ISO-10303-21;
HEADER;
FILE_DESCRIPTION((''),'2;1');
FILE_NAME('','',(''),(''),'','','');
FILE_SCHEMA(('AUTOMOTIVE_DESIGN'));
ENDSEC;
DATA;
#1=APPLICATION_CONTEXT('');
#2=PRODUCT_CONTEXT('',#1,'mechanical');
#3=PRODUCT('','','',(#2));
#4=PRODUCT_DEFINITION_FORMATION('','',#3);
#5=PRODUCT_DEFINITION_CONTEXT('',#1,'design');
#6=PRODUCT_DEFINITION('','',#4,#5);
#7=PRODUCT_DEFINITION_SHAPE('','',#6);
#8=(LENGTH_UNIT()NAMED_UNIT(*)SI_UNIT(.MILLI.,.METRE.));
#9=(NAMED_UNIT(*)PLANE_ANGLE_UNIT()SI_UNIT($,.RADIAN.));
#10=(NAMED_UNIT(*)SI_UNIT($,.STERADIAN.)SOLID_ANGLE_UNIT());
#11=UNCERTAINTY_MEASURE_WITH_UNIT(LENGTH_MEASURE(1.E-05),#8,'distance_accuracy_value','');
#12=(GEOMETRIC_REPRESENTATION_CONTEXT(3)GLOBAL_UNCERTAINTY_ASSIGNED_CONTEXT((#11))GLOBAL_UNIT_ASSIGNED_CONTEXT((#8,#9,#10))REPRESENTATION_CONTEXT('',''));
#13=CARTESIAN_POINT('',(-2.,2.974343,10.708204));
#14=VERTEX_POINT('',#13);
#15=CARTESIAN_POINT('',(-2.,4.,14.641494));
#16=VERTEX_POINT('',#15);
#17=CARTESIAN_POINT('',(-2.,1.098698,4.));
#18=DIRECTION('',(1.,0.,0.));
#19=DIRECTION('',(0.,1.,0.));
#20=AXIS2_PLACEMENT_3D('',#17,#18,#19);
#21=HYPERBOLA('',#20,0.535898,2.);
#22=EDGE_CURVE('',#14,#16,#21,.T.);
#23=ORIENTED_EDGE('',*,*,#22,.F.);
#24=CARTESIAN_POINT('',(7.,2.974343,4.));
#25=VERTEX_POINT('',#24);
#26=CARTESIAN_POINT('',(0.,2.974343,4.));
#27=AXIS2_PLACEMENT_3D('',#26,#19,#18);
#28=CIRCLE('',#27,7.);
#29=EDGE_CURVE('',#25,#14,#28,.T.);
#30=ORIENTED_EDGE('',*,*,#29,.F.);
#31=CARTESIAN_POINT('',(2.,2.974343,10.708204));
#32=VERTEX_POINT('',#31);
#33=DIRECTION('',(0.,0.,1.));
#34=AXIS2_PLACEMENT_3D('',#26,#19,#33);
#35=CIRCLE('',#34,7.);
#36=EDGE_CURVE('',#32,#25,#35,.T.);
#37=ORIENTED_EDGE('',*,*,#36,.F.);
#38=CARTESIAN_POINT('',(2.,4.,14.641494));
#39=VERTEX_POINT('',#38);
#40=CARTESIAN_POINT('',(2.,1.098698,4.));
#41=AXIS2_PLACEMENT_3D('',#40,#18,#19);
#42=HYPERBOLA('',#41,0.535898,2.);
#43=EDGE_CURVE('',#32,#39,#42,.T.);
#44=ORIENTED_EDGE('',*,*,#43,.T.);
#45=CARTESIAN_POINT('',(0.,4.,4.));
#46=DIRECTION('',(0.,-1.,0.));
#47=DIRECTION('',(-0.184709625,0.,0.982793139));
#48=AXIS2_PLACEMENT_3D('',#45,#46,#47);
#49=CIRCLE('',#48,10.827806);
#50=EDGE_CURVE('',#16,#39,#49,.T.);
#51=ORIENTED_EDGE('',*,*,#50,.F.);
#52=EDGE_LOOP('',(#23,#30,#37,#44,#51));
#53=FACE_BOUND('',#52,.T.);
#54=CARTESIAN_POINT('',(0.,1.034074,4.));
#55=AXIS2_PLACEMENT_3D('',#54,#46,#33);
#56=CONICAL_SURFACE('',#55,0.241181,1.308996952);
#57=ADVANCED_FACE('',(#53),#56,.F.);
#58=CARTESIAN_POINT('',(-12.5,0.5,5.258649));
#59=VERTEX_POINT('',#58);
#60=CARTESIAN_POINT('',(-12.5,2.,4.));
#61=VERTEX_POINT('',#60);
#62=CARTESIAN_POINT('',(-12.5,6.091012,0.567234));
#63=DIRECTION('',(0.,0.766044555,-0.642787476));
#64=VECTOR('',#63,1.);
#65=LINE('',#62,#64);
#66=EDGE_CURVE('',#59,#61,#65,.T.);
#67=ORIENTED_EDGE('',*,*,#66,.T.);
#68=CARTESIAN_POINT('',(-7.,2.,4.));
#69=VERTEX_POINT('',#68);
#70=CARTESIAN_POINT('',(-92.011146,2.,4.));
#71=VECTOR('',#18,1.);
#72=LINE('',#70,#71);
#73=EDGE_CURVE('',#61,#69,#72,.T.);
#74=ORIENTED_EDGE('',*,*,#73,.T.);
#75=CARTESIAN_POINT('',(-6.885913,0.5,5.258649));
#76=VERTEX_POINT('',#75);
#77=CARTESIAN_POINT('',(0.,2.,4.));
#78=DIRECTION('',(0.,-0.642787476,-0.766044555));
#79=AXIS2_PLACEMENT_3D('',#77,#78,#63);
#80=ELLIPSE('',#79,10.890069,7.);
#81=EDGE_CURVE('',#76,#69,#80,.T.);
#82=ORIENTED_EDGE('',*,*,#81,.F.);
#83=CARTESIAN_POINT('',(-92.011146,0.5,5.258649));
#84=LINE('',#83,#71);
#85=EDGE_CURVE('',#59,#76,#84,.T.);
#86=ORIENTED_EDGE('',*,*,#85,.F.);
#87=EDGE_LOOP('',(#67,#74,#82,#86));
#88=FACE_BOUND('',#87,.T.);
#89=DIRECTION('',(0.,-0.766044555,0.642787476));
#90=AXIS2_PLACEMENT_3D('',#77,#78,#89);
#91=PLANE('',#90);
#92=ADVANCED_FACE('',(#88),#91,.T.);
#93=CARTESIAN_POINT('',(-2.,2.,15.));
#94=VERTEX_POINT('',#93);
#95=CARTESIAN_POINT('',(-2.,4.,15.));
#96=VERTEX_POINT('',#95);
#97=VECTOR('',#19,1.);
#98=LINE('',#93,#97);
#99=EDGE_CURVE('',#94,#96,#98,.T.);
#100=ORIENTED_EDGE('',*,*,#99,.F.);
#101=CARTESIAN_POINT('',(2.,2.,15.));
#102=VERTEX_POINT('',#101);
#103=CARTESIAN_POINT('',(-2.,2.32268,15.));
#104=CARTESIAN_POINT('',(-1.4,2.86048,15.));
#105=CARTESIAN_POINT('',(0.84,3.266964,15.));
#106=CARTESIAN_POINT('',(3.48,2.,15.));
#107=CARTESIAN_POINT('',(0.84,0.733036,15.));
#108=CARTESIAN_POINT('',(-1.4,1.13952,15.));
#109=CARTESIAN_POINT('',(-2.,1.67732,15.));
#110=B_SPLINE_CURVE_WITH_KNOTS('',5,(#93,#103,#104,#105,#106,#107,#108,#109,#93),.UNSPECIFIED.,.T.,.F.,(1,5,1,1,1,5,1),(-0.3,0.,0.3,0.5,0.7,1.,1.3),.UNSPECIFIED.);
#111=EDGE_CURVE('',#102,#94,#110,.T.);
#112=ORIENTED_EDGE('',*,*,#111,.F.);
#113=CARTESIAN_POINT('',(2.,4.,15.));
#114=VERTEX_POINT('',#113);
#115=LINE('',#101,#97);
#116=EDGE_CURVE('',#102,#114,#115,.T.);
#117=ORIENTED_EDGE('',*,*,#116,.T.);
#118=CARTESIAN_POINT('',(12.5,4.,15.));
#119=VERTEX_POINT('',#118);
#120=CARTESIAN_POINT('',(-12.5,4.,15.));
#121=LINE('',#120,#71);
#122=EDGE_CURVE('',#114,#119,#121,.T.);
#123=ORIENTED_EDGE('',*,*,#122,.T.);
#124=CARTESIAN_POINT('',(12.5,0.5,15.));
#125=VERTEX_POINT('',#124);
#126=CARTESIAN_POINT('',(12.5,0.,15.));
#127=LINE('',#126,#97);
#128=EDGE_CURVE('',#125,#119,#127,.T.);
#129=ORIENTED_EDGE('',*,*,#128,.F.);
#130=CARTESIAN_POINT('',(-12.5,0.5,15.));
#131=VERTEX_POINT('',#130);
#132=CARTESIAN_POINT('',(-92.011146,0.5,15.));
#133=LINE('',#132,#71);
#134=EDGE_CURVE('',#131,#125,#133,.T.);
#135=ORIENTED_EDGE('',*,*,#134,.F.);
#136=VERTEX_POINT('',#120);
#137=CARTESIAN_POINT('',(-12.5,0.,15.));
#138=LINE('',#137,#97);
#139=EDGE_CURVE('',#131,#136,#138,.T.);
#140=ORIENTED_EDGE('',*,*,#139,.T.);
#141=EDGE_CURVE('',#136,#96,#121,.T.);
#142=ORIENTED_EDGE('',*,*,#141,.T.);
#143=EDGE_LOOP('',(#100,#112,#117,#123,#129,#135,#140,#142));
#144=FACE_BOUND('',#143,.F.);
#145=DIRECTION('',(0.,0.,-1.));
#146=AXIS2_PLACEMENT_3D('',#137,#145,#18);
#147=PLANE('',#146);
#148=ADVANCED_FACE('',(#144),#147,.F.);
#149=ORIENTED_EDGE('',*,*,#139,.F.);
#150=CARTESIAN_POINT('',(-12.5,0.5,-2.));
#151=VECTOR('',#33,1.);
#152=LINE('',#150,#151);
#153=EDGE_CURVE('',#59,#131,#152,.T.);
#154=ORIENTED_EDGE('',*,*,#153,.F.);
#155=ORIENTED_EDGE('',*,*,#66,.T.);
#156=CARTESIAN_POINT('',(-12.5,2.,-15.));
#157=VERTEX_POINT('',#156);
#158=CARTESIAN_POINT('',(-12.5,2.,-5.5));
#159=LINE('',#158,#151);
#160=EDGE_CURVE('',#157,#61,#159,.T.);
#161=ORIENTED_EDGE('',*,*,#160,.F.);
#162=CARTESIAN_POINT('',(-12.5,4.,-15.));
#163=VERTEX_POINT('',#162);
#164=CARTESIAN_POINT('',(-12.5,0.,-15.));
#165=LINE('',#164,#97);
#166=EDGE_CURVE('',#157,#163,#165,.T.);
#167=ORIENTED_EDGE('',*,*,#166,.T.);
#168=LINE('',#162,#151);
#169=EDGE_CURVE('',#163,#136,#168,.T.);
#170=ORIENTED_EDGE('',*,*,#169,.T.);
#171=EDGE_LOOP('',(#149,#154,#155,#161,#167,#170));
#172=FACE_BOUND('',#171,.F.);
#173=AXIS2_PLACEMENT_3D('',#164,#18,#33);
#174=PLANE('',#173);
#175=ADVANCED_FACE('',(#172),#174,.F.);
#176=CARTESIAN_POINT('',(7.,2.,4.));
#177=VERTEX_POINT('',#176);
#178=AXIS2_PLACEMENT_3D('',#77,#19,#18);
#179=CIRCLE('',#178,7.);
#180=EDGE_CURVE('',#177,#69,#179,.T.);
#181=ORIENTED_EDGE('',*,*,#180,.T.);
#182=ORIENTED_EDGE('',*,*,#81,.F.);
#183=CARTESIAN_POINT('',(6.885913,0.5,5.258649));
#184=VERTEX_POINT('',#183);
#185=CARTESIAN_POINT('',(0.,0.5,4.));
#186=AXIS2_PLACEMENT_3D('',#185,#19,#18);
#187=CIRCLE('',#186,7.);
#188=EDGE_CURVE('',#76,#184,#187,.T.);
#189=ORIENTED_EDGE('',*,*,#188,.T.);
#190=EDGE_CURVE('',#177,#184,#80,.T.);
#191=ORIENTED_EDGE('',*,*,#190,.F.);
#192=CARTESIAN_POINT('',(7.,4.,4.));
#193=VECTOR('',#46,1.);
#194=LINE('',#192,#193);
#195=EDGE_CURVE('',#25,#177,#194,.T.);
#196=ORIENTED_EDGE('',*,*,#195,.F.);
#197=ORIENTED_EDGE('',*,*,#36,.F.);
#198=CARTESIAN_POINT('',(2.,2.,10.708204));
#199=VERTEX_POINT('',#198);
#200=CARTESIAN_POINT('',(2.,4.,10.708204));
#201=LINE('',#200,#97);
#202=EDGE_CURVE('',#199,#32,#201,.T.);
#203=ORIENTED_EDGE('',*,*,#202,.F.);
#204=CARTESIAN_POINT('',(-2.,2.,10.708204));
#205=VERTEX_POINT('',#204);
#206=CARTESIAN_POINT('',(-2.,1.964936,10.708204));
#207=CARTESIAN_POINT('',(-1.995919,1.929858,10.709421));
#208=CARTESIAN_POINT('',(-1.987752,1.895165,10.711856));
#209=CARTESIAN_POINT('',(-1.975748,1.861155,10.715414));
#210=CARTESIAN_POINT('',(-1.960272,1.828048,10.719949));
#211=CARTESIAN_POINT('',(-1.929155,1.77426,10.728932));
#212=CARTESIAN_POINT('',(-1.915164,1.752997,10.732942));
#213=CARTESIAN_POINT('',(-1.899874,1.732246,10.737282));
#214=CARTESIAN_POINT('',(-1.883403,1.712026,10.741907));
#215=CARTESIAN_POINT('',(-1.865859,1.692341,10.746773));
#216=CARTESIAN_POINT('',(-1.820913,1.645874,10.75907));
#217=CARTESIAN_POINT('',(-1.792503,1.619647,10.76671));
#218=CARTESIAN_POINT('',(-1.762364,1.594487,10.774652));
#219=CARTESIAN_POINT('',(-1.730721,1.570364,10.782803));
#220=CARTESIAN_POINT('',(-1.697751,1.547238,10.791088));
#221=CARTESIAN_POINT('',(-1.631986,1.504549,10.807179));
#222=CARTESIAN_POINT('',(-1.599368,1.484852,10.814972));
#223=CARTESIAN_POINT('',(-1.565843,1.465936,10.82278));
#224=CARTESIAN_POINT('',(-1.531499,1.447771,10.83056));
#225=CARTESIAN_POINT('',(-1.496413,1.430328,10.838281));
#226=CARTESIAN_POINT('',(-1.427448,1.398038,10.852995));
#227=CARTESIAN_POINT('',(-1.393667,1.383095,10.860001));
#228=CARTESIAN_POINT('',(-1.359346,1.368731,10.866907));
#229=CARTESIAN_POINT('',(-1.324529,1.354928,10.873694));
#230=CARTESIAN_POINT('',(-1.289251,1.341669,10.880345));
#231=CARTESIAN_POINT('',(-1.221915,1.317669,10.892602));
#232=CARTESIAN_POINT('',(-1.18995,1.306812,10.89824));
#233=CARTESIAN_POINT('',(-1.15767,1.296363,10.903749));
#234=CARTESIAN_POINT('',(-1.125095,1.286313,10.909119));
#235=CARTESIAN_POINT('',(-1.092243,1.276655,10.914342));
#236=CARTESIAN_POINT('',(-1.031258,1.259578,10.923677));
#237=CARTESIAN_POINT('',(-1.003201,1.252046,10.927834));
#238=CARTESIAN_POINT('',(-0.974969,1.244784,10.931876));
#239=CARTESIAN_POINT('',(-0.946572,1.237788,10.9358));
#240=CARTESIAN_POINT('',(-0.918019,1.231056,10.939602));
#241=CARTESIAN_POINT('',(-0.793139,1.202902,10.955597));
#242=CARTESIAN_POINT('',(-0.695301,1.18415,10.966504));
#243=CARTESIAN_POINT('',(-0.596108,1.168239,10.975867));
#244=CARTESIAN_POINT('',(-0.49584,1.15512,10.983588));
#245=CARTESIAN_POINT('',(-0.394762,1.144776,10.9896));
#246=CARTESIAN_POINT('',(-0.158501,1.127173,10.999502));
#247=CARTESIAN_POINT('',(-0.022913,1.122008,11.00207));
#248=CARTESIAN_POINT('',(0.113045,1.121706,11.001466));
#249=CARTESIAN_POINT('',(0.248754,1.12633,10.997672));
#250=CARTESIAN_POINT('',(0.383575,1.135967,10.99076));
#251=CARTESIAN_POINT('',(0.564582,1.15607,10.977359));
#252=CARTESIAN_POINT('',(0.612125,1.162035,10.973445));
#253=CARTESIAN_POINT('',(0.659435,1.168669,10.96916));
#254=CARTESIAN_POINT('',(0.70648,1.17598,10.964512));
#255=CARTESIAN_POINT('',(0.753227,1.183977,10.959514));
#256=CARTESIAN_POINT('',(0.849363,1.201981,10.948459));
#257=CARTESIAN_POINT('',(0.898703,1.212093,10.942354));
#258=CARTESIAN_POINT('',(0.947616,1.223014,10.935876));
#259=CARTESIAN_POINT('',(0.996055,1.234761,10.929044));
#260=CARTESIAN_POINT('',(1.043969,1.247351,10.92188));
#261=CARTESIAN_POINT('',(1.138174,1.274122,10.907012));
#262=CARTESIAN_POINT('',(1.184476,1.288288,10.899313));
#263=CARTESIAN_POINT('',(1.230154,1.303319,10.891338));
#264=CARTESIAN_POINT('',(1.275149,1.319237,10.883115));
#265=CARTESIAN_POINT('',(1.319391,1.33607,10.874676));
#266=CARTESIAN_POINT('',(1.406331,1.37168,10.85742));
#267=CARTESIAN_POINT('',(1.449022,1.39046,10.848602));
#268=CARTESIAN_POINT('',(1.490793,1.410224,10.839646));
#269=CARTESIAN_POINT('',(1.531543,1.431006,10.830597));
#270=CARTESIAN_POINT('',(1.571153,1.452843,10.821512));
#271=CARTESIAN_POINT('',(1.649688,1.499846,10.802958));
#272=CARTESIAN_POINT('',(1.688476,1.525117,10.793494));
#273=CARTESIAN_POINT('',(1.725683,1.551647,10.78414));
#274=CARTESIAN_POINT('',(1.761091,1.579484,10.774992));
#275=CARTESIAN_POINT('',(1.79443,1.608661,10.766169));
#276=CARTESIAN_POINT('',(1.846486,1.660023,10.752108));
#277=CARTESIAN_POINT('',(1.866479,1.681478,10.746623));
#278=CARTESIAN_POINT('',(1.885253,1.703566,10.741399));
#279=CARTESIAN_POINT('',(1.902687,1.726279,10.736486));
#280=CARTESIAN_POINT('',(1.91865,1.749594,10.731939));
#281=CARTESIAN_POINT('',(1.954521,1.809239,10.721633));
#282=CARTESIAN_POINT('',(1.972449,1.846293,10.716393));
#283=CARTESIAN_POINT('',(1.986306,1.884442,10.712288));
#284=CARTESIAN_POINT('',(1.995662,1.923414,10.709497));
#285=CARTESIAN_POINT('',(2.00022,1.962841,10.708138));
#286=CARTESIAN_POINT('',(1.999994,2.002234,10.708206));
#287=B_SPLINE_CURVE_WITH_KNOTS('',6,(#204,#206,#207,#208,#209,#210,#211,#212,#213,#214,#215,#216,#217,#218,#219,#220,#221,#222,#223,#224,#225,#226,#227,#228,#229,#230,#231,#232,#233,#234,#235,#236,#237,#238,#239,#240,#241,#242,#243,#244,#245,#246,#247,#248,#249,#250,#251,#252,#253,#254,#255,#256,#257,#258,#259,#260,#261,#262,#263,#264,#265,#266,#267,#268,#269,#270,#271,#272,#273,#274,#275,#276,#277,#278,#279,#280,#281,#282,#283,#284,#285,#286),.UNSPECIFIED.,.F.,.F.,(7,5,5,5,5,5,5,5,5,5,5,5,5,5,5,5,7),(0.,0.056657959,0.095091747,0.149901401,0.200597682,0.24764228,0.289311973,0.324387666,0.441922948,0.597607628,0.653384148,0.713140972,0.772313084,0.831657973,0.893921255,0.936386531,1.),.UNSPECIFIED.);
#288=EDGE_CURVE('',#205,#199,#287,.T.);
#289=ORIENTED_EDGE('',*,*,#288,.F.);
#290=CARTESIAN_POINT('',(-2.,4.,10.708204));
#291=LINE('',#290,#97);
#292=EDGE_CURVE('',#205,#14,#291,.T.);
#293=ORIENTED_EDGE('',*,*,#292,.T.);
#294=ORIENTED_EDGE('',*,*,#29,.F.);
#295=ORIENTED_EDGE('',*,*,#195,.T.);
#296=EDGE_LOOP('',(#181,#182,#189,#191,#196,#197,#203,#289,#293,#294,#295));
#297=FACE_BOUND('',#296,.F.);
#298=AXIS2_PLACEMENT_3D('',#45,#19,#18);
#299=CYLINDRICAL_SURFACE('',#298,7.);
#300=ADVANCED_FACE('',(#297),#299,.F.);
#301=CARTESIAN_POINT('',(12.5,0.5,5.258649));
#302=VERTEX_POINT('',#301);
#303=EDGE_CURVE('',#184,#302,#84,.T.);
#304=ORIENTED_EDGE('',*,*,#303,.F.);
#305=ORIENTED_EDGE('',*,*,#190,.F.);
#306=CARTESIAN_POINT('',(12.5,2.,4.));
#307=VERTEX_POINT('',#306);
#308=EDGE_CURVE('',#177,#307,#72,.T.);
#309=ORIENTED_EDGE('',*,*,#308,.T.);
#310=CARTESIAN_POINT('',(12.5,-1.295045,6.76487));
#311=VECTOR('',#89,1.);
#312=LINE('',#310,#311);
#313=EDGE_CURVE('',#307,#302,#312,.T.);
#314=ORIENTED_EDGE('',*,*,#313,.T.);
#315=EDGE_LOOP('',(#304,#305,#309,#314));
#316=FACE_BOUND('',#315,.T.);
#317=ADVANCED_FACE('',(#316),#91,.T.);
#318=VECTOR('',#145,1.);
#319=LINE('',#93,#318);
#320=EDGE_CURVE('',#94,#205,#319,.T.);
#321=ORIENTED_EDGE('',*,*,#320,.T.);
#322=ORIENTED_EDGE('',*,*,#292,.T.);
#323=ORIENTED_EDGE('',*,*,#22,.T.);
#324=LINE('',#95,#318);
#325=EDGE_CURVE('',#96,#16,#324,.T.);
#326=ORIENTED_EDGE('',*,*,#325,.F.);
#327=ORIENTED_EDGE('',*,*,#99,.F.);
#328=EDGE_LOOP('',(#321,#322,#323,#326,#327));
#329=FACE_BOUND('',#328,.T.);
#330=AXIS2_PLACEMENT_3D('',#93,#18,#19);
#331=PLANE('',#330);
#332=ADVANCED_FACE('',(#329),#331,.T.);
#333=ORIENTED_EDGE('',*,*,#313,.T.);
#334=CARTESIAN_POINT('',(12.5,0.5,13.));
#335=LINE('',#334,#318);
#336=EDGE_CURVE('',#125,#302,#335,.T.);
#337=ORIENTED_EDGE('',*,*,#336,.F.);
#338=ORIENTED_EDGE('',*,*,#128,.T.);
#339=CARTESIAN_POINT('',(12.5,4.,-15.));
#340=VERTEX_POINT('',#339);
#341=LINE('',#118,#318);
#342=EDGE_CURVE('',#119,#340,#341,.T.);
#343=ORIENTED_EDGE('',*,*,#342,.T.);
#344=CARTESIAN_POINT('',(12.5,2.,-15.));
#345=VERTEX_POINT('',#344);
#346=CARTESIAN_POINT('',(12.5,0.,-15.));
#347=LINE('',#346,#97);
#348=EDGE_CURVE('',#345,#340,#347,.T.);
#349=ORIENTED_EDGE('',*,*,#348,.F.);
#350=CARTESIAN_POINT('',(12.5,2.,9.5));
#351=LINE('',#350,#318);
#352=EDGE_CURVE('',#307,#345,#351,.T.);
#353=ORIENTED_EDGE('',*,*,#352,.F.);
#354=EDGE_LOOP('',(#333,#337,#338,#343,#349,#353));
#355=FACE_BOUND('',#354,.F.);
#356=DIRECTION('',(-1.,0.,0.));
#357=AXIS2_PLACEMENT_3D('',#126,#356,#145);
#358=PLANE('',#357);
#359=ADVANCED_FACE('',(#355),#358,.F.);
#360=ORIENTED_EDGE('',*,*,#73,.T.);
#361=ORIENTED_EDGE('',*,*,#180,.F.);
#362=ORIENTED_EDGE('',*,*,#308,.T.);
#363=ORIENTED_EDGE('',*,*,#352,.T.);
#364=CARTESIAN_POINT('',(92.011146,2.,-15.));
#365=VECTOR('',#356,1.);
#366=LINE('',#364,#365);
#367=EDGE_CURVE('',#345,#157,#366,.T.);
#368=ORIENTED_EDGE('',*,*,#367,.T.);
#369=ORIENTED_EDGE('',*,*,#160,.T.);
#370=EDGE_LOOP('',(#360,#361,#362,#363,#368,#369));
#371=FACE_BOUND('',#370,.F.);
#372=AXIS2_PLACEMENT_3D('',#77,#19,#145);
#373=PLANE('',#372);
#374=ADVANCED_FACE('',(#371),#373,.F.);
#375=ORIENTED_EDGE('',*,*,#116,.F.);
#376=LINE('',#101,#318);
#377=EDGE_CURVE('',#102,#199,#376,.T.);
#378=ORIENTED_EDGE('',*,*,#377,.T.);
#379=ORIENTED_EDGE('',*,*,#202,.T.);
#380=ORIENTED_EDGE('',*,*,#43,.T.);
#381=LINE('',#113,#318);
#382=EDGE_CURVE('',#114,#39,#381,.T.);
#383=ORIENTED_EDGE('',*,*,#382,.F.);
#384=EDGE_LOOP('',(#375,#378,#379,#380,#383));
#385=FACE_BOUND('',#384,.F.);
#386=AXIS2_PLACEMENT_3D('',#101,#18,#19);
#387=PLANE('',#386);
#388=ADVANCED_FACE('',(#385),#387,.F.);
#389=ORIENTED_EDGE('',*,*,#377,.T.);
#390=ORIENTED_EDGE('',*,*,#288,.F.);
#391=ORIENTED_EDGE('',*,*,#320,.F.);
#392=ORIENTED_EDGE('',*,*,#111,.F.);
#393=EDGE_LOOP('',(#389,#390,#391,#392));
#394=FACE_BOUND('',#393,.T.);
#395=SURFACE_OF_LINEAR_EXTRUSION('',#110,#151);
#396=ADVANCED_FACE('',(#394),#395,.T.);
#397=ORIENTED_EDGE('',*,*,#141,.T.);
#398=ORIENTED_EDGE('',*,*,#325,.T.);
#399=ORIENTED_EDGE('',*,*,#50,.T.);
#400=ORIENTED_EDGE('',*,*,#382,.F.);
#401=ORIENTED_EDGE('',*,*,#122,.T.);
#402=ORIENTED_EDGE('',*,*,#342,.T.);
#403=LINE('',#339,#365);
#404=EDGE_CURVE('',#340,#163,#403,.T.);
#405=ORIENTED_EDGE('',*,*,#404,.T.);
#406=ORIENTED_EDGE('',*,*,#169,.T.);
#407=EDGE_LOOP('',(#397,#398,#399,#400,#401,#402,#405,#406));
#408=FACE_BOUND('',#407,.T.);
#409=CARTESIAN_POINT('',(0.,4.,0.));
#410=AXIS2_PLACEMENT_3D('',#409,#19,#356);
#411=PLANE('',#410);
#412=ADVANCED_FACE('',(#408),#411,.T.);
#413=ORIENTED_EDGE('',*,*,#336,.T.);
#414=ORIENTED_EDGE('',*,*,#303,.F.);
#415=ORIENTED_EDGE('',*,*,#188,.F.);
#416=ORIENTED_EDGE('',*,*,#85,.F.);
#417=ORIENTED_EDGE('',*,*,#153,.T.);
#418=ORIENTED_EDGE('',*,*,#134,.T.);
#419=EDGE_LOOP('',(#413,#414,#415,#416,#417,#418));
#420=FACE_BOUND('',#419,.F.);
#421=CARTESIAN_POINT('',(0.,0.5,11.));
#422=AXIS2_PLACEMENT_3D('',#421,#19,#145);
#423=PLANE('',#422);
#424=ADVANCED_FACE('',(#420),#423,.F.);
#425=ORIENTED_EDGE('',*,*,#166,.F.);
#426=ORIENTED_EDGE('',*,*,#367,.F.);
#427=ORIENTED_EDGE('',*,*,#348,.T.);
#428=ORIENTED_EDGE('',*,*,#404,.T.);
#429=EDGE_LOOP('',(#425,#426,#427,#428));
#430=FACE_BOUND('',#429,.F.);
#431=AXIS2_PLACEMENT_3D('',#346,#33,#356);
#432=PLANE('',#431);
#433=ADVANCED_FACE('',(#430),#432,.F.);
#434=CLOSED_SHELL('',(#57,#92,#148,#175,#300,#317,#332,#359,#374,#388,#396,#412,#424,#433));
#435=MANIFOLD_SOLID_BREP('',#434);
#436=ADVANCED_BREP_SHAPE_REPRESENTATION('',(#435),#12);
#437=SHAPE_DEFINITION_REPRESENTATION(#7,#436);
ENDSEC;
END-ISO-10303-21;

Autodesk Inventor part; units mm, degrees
ref_plane "YZ Plane" through (0, 0, 0) normal (1, 0, 0) x (0, 1, 0)
ref_plane "XZ Plane" through (0, 0, 0) normal (0, 1, 0) x (-1, 0, 0)
ref_plane "XY Plane" through (0, 0, 0) normal (0, 0, 1) x (1, 0, 0)
sketch "Sketch1" plane through (0, 0, 0) normal (0, 1, 0) x (-1, 0, 0)
  line L0 (12.5, 15) -> (-12.5, 15)
  line L1 (-12.5, 15) -> (-12.5, -15)
  line L2 (-12.5, -15) -> (12.5, -15)
  line L3 (12.5, -15) -> (12.5, 15)
  line L4 (12.5, 15) -> (-12.5, -15) construction
  line L5 (-12.5, 15) -> (12.5, -15) construction
  point P0 (0, 0)
  dimension "d0" = 25
  dimension "d1" = 30
extrude "Extrusion1" add sketch "Sketch1" along normal blind 4
sketch "Sketch2" plane through (0, 4, 0) normal (0, 1, 0) x (1, 0, 0)
  line L0 (-12.5, 15) -> (-12.5, -15) construction
  line L1 (-12.5, -11) -> (12.5, -11) construction
  line L2 (12.5, -15) -> (12.5, 15) construction
  line L3 (-12.5, -15) -> (12.5, -15) construction
  circle A0 centre (0, -4) radius 7
  line L4 (0, -15) -> (0, 15) construction
  line L5 (12.5, 15) -> (-12.5, 15) construction
  point P0 (0, 0)
  point P1 (0, -11)
  dimension "d5" = 14
  dimension "d4" = 4
extrude "Extrusion2" cut sketch "Sketch2" against normal through all
sketch "Sketch3" plane through (0, 0, 0) normal (1, 0, 0) x (0, 1, 0)
  line L0 (4, -3) -> (4, 11) construction
  line L1 (0, -15) -> (0, 15) construction
  line L2 (0, 15) -> (4, 15) construction
  line L3 (4, -15) -> (4, 15) construction
  line L4 (0, -15) -> (4, -15) construction
  line L5 (4, 4) -> (0, 4) construction
  line L6 (2, 4) -> (0.5, 5.258649)
  line L7 (2, 4) -> (2, -15)
  line L8 (0, -15) -> (4, -15)
  line L9 (2, -15) -> (1.618278, -15)
  line L10 (0.5, 15) -> (0.5, 5.258649)
  line L11 (1.618278, -15) -> (0, -15)
  line L12 (0, -15) -> (0, 15)
  line L13 (0, 15) -> (0.5, 15)
  line L14 (0, 15) -> (4, 15)
  line L15 (4, 11) -> (0, 11)
  line L16 (4, -3) -> (0, -3)
  point P0 (0, 0)
  dimension "d6" = 50
  dimension "d7" = 2
  dimension "d8" = 1.5
extrude "Extrusion3" cut sketch "Sketch3" along normal through all both and the other way through all
sketch "Sketch7" plane through (-12.5, 4, 15) normal (0, 0, 1) x (1, 0, 0)
  line L0 (0, -3.5) -> (25, -3.5) construction
  line L1 (25, -3.5) -> (25, 0) construction
  line L2 (0, 0) -> (25, 0) construction
  line L3 (0, -3.5) -> (0, 0) construction
  line L4 (5.5, -2) -> (19.5, -2) construction
  circle A0 centre (12.5, -2) radius 0.875 construction
  line L5 (12.5, -2) -> (14.5, -2) construction
  line L6 (12.5, 0) -> (12.5, -3.5) construction
  line L7 (12.5, -2) -> (10.5, -2) construction
  spline S0 degree 5 poles (10.5, -2) (10.5, -1.67732) (11.1, -1.13952) (13.34, -0.733036) (15.98, -2) (13.34, -3.266964) (11.1, -2.86048) (10.5, -2.32268) (10.5, -2) knots 0 0 0 0 0 0 0.3 0.5 0.7 1 1 1 1 1 1
  line L8 (10.5, -2) -> (10.5, 0)
  line L9 (14.5, -2) -> (14.5, 0)
  line L10 (10.5, 0) -> (14.5, 0)
  point P0 (12.5, -4)
  point P1 (12.5, -2.875)
  dimension "d26" = 1.75
  dimension "d27" = 2
  dimension "d28" = 2
extrude "Extrusion4" cut sketch "Sketch7" against normal blind 10.25
sketch "Sketch4" plane through (0, 0, 0) normal (1, 0, 0) x (0, 1, 0)
  line L0 (2, -15) -> (2, 4)
  line L1 (2, 4) -> (0.5, 5.258649)
  line L2 (0.5, 5.258649) -> (0.5, 15)
  line L3 (0.5, 15) -> (4, 15)
  line L4 (4, -15) -> (4, 15)
  line L5 (2, -15) -> (4, -15)
  line L6 (4, 11) -> (4, -3)
  line L7 (2, 4) -> (2, -15)
  line L8 (4, 4) -> (0, 4)
  line L9 (4, -15) -> (4, 15)
  line L10 (2, 4.5) -> (2, 3.5)
  line L11 (2.965926, 4.758819) -> (1.034074, 4.241181)
  line L12 (1.034074, 4.241181) -> (6.725631, -17)
  line L13 (6.725631, -17) -> (8.657483, -16.482362)
  line L14 (8.657483, -16.482362) -> (3.169251, 4)
  line L15 (3.169251, 4) -> (1.098698, 4)
  point P0 (0, 0)
  point P1 (2, 4)
  dimension "d13" = 0.5
  dimension "d18" = 15
  dimension "d19" = 2
  dimension "d20" = 2
revolve "Revolution2" cut sketch "Sketch4" angle 360 about axis through (0, 4, 4) along (0, -1, 0) contours L0 L12 L8 | L0 L8 L14 L4 L12 | L4 L14 L13 L12
properties part number "wide_access_platform_v01_ok"
